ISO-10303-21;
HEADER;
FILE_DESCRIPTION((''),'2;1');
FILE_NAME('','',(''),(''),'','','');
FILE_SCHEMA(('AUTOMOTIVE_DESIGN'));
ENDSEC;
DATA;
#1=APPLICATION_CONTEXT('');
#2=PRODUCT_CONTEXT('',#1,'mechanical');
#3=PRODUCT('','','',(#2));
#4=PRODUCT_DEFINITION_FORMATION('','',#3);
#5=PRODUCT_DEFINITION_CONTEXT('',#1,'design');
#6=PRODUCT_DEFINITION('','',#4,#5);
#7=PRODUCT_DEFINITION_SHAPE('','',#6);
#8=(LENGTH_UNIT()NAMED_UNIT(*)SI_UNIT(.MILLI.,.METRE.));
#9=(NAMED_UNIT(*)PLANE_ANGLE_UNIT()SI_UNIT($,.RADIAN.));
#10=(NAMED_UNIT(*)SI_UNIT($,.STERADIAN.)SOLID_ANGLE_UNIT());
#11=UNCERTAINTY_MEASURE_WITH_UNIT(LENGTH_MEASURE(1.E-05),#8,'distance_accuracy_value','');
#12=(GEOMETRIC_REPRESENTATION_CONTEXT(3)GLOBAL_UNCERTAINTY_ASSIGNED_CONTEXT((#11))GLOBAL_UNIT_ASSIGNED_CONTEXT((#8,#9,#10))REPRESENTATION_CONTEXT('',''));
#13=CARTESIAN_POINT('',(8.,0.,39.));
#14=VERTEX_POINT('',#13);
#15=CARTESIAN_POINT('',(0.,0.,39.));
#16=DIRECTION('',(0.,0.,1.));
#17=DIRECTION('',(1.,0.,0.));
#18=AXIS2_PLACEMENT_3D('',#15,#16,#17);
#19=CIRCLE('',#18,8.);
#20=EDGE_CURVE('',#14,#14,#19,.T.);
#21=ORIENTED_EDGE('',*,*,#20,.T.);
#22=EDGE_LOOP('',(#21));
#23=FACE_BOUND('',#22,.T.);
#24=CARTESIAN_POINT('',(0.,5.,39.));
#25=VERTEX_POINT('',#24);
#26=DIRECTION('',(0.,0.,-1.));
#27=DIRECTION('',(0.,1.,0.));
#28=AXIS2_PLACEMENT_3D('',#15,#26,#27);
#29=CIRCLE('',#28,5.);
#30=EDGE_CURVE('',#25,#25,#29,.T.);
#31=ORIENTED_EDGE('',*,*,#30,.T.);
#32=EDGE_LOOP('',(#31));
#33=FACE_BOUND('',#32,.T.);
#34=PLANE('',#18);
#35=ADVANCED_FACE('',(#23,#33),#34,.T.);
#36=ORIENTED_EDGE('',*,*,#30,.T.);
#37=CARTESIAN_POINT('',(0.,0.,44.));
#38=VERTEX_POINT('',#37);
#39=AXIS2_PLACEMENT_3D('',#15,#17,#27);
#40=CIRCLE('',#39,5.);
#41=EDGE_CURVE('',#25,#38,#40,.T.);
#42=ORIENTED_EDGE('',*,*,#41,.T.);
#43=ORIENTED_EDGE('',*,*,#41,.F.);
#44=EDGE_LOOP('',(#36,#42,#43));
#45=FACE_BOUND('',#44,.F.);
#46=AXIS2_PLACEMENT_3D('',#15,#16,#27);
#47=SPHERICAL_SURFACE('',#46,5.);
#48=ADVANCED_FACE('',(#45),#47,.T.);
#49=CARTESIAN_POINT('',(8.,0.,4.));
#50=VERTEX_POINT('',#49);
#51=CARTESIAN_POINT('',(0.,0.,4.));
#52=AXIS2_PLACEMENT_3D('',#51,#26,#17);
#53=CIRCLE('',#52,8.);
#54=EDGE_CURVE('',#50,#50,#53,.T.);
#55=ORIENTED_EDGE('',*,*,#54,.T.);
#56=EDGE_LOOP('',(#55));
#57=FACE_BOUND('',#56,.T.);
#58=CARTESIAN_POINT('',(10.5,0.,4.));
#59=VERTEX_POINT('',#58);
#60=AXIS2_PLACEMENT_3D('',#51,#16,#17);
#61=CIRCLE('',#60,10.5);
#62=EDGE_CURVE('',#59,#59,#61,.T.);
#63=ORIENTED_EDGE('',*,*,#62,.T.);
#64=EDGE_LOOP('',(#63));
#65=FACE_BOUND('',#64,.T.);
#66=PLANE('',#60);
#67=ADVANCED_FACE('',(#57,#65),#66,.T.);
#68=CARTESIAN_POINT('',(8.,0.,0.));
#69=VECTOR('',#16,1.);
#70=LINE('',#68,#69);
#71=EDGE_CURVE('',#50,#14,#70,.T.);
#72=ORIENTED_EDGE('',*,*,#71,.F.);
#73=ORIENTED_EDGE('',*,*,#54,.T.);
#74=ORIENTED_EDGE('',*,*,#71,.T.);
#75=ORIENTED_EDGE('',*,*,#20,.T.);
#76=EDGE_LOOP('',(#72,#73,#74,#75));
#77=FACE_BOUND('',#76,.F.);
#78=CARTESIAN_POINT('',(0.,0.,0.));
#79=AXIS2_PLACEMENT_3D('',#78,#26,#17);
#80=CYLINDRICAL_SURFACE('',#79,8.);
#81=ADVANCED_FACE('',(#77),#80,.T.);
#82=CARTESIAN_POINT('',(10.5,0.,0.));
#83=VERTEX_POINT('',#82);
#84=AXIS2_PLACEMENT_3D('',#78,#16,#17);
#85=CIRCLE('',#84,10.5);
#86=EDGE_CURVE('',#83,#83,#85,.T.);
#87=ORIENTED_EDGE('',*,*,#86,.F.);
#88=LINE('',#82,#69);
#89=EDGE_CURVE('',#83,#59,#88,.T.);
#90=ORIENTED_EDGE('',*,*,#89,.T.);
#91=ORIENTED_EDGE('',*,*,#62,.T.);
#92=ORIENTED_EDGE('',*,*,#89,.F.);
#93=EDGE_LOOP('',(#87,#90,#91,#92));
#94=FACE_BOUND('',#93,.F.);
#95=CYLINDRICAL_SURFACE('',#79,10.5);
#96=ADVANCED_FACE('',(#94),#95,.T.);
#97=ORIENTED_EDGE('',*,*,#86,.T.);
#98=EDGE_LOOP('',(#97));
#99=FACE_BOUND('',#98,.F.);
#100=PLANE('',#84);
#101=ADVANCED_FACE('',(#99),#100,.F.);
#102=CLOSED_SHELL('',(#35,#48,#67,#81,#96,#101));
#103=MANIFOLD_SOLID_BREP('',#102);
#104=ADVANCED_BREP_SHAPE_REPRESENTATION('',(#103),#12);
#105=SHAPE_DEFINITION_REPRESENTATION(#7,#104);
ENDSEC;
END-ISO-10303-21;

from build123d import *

# Parameters (mm, degrees)
F0_R     = 10.5
F1_DEPTH = 4
F2_R     = 8
F3_DEPTH = 39


# Not quite as in the source:
# - a feature names something its author has since deleted; it is built from what else it names


with BuildPart() as f1:
    # F0 (on Top) → F1 (new body)
    with BuildSketch(Plane.XY):
        Circle(F0_R)
    extrude(amount=F1_DEPTH)

    # F2 (on Top) → F3 (join)
    with BuildSketch(Plane.XY):
        Circle(F2_R)
    extrude(amount=F3_DEPTH)

    # F4 (on Right) → F5 (revolve)
    with BuildSketch(Plane.YZ):
        with BuildLine():
            ThreePointArc((5, 39), (3.5355339059, 42.5355339059), (0, 44))
            Line((0, 44), (0, 39))
            Line((0, 39), (5, 39))
        make_face()
    revolve(axis=Axis((0, 0, 41.5), (0, 0, -1)))


solid = f1.part
